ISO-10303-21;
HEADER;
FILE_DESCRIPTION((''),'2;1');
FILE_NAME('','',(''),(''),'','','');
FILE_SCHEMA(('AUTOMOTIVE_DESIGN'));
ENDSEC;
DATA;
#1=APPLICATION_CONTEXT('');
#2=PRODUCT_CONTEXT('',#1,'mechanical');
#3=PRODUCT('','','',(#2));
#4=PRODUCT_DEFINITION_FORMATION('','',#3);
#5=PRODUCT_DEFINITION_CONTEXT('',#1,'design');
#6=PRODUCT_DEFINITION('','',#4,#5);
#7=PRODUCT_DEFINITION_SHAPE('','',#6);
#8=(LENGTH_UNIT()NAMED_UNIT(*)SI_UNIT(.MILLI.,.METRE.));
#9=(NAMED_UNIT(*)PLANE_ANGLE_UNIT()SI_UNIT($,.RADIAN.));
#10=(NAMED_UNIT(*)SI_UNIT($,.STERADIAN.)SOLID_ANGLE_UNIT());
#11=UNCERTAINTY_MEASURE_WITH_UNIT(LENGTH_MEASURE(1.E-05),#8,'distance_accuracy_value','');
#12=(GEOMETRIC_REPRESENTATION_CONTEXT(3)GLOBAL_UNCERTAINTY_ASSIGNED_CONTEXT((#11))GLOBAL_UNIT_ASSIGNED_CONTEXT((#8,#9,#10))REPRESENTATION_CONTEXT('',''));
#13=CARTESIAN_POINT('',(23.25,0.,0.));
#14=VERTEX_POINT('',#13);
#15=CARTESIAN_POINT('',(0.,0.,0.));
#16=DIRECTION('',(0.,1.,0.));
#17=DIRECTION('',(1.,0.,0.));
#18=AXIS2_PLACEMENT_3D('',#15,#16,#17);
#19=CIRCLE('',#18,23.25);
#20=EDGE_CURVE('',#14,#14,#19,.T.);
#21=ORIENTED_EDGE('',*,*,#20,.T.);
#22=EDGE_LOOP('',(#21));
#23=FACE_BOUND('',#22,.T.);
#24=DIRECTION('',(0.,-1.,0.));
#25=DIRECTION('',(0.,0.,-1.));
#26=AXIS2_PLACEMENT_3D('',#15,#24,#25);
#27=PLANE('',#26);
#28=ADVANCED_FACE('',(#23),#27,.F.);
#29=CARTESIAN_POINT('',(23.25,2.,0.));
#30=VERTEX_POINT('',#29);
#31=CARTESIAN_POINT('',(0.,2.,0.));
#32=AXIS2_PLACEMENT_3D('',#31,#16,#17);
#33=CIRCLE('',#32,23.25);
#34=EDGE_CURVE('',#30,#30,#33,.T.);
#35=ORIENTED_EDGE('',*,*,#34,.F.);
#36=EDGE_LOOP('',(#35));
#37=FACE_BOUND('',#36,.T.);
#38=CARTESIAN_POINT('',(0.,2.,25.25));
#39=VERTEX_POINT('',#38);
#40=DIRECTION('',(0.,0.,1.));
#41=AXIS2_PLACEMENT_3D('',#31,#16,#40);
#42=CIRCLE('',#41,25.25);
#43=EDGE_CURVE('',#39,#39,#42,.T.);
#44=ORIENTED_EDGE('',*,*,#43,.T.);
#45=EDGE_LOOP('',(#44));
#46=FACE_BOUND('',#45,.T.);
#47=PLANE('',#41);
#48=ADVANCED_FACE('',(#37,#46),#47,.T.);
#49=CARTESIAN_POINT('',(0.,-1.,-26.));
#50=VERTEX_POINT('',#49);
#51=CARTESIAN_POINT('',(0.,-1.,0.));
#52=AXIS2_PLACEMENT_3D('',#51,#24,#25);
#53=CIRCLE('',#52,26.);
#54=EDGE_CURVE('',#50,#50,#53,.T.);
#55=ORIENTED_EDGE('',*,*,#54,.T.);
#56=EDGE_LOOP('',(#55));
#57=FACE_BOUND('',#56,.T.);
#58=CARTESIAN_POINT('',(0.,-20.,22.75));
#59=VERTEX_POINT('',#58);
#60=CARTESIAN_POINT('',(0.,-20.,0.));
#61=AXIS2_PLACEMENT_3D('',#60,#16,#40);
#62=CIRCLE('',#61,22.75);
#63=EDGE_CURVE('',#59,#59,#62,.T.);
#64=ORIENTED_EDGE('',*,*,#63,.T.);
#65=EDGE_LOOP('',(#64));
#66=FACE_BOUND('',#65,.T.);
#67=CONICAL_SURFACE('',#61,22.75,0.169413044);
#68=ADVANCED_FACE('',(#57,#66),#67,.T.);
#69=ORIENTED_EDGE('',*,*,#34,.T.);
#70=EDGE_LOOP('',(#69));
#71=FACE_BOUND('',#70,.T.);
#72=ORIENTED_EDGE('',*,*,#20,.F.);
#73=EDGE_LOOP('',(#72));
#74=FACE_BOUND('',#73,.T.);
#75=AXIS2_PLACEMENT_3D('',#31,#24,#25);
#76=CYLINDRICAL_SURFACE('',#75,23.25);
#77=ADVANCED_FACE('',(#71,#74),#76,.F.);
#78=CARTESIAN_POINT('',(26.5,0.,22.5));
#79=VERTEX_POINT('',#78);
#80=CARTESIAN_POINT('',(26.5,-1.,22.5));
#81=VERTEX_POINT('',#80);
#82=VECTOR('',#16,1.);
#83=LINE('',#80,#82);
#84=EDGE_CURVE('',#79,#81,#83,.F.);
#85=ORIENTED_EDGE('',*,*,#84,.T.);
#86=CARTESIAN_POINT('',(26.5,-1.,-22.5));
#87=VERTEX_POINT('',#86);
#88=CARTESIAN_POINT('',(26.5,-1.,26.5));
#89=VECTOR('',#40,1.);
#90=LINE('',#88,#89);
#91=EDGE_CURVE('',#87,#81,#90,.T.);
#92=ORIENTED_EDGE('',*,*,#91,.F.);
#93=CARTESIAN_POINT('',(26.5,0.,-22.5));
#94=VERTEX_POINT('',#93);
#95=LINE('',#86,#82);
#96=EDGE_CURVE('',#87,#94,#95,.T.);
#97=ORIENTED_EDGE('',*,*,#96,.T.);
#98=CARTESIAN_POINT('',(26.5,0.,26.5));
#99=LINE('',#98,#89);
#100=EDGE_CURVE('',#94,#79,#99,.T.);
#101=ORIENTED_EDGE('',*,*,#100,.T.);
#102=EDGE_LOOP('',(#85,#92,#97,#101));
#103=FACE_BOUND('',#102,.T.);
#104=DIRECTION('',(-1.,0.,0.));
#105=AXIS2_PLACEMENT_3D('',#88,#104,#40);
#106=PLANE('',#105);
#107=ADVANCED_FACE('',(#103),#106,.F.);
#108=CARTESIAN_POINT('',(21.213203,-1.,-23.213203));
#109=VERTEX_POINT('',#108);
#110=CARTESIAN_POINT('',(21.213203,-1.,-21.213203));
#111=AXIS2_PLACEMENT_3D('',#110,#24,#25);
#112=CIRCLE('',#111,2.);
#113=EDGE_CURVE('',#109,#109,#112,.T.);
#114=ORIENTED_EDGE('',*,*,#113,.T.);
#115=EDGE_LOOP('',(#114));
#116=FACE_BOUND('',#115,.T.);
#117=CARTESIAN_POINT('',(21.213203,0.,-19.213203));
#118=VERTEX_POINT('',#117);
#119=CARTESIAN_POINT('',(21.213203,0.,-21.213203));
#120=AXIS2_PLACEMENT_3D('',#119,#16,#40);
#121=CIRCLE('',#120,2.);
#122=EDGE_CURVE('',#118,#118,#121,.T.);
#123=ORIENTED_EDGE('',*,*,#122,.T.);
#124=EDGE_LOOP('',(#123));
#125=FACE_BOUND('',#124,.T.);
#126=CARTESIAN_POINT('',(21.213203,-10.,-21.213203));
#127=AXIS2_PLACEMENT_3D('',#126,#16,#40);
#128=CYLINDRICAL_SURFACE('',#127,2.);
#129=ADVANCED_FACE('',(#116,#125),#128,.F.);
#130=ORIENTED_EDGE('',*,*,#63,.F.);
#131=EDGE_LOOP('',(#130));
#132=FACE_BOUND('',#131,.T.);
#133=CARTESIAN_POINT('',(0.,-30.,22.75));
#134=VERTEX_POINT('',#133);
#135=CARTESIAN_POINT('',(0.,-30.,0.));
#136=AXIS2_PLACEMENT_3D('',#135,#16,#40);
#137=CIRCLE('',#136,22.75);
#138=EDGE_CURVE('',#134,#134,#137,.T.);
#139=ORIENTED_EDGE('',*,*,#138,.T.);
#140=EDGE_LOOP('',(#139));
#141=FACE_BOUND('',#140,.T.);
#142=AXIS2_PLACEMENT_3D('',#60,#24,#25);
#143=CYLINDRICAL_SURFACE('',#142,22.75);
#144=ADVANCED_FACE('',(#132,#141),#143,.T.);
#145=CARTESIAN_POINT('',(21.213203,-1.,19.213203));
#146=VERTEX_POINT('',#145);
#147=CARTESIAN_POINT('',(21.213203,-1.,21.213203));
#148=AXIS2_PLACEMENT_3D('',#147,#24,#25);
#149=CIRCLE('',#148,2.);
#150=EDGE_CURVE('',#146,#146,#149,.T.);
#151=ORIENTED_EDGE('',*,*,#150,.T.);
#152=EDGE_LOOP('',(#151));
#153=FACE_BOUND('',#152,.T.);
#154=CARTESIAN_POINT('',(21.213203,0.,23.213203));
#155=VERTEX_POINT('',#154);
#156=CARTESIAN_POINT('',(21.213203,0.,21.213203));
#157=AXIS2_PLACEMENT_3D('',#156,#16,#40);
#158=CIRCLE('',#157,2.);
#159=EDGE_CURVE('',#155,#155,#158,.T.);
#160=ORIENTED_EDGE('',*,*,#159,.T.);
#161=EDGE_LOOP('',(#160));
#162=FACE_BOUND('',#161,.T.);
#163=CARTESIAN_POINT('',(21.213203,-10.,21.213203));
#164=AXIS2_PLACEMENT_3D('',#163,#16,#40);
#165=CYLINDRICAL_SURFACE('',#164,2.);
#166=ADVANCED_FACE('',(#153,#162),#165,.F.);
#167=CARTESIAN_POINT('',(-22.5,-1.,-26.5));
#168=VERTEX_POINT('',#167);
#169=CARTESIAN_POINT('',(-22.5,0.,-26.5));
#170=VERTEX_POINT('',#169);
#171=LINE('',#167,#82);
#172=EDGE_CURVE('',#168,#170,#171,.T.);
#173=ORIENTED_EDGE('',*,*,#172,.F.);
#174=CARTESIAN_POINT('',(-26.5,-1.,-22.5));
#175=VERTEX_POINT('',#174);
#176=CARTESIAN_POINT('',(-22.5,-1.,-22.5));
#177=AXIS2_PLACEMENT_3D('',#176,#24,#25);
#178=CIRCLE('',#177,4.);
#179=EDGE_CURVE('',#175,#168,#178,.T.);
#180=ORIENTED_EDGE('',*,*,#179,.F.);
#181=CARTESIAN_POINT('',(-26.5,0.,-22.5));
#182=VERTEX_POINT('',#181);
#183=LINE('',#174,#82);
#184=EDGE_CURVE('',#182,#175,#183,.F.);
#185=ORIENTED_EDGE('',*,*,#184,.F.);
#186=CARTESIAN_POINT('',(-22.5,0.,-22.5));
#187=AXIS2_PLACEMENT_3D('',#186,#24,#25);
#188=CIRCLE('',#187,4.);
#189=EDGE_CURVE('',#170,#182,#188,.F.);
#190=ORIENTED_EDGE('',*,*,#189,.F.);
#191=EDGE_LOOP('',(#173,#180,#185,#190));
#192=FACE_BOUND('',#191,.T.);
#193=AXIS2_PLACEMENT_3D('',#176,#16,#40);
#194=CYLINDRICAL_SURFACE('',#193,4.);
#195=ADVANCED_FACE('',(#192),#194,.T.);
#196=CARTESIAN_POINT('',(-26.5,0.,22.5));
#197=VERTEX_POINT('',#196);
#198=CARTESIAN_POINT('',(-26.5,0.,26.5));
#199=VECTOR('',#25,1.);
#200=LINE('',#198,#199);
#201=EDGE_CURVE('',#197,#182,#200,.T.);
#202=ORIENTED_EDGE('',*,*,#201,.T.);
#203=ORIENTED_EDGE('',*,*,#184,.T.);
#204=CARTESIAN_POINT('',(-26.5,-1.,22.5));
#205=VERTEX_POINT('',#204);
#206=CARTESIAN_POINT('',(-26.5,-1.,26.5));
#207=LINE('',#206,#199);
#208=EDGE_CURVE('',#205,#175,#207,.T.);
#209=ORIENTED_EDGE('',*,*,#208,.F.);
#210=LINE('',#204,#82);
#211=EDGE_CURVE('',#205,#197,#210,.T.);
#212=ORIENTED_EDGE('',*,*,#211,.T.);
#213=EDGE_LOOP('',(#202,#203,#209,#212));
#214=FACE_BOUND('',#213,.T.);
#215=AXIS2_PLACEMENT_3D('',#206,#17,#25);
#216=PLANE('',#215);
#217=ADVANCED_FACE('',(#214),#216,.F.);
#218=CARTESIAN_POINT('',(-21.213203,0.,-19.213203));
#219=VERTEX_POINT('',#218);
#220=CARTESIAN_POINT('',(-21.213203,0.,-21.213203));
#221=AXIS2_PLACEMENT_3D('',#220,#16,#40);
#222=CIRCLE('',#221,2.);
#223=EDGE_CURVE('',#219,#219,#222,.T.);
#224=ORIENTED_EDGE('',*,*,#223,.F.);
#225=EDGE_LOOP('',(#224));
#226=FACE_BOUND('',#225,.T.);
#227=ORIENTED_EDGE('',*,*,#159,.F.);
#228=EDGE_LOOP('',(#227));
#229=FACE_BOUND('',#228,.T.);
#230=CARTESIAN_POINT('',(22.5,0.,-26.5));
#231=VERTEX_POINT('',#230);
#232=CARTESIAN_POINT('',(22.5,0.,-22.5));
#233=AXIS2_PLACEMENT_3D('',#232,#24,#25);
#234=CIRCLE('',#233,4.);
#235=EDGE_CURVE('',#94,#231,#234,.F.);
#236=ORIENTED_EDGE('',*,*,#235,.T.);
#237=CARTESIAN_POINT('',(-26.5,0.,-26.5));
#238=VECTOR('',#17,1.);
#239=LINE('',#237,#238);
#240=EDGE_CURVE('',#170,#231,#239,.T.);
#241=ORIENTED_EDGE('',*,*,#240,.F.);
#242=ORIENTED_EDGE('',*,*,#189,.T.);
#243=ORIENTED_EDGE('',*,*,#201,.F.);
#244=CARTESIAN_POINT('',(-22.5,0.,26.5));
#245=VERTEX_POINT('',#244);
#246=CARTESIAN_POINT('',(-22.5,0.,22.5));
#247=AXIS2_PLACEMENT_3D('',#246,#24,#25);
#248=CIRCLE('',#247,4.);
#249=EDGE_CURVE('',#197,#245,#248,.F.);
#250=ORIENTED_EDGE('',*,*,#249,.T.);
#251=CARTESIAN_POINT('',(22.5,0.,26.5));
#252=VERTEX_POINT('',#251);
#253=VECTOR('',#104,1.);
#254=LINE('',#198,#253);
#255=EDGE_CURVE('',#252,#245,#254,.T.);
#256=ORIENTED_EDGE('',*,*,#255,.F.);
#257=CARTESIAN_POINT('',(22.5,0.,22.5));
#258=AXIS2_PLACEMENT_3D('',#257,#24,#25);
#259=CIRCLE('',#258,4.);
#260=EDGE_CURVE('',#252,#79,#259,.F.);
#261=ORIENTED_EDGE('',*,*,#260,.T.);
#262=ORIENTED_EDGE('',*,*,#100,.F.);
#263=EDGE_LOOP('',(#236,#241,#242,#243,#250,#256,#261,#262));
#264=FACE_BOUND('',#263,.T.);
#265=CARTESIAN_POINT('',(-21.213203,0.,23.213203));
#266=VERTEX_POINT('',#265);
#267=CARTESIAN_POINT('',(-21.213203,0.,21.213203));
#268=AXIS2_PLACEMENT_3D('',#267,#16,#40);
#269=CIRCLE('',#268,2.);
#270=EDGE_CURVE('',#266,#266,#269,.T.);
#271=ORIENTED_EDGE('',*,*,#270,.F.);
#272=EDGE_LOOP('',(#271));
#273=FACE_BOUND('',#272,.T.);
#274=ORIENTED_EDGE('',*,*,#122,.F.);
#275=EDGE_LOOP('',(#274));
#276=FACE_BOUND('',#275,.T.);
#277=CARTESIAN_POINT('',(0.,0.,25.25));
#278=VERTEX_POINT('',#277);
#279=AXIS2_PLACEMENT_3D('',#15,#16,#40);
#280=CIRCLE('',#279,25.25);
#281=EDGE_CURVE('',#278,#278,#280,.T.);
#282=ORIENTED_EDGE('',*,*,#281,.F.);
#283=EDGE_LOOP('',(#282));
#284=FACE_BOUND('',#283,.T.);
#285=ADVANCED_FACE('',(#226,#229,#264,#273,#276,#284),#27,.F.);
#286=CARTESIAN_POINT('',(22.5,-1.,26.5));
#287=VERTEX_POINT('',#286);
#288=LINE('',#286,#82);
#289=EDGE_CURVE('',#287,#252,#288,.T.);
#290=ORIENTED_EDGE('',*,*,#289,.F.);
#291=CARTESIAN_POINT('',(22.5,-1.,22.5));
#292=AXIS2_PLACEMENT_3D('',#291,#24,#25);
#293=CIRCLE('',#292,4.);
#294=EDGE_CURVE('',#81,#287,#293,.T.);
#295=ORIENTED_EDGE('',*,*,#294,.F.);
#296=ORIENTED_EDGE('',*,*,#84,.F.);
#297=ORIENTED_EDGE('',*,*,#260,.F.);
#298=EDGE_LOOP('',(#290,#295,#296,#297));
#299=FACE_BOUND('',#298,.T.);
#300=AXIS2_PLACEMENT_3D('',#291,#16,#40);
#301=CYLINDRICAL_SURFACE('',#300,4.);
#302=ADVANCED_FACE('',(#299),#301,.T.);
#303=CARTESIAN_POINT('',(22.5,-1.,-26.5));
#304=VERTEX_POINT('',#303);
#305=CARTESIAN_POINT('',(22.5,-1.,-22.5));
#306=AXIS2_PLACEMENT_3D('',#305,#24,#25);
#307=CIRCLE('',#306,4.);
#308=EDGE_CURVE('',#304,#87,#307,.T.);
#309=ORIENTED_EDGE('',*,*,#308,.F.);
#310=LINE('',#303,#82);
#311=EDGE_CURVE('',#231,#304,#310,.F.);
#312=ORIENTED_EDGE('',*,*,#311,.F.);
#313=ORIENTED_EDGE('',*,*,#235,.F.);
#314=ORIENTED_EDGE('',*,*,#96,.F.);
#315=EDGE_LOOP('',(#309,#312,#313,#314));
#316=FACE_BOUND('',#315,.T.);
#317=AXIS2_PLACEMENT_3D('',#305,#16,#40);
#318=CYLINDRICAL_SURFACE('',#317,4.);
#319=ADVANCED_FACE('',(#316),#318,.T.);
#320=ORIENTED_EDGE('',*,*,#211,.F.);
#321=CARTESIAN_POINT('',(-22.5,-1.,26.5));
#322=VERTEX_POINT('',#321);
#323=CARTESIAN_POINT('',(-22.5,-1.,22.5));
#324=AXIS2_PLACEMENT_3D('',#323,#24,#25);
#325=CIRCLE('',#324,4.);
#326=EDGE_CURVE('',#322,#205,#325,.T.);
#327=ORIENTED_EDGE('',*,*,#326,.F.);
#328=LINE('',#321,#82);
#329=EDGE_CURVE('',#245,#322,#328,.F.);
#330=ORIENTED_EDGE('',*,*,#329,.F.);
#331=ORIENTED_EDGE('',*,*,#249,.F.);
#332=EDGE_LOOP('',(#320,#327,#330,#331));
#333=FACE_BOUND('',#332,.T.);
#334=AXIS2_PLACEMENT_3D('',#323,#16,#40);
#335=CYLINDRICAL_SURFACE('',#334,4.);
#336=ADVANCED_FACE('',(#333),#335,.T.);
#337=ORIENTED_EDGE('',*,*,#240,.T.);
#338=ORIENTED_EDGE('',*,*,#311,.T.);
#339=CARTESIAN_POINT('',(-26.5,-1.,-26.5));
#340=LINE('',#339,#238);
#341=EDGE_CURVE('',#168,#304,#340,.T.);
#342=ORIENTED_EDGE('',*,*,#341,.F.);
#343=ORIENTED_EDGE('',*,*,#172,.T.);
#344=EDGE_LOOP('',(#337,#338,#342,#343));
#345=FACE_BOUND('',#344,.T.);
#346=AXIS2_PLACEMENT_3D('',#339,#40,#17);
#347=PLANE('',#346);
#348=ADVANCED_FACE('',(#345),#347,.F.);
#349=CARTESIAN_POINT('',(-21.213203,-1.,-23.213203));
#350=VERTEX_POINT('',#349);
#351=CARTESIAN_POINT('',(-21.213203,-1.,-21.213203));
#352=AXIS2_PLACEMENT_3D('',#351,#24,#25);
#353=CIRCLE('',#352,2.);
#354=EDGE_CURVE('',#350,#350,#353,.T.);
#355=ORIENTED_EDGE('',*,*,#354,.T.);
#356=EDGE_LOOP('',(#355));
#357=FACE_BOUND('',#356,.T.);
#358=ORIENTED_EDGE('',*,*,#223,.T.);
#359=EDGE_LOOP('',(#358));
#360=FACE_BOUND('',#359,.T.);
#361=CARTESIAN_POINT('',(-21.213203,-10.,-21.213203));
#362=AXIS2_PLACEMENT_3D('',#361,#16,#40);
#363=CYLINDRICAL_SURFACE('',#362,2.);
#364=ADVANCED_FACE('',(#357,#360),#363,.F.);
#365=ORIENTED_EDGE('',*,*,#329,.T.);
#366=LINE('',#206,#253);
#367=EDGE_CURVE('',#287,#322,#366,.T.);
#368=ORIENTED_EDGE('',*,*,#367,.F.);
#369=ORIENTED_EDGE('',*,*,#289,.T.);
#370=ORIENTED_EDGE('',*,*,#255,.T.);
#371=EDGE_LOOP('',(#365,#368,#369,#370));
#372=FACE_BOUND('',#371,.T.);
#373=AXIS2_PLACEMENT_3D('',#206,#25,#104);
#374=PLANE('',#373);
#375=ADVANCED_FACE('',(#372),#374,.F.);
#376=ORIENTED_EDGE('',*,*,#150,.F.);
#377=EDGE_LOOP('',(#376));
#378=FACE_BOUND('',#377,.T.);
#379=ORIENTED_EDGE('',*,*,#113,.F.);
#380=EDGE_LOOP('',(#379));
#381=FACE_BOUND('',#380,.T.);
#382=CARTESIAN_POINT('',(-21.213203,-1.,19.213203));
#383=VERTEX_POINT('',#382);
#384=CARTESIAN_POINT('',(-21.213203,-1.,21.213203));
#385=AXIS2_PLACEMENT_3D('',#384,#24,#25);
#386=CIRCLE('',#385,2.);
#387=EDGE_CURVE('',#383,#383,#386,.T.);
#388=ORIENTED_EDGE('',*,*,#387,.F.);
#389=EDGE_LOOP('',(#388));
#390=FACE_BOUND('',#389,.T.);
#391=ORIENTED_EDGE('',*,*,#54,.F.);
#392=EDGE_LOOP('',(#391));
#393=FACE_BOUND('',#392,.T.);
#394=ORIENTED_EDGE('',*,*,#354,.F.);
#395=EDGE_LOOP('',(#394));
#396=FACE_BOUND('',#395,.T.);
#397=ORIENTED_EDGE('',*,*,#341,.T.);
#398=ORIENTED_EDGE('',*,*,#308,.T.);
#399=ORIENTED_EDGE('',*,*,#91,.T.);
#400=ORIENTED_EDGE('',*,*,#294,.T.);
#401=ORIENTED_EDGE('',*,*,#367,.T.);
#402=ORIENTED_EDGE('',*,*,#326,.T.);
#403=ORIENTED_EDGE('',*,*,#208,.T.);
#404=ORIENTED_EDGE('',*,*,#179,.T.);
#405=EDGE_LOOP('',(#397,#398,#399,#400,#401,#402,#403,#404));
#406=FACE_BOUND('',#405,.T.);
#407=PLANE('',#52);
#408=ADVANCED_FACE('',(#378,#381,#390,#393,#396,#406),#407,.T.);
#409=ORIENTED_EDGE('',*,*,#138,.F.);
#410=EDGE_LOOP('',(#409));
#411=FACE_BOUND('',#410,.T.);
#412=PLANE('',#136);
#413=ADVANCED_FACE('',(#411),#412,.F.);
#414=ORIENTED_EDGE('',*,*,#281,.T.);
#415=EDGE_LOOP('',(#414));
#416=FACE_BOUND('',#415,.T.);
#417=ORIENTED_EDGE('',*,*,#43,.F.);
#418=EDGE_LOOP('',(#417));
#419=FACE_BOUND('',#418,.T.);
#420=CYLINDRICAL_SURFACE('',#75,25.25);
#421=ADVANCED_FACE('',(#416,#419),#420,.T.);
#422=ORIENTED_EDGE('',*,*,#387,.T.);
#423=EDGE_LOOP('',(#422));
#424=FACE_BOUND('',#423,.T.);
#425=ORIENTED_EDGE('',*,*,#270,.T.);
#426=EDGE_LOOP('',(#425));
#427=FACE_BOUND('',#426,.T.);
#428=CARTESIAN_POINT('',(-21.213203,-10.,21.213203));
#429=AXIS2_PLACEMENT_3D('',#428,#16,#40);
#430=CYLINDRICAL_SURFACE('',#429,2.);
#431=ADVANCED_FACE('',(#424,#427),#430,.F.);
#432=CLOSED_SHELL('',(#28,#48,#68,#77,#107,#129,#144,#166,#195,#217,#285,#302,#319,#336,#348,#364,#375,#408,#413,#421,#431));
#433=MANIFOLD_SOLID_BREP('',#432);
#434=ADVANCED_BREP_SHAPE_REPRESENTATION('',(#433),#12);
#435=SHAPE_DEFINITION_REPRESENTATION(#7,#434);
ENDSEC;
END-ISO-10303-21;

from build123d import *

# Parameters (mm, degrees)
SKETCH_1_R          = 25.25
SKETCH_1_R_2        = 23.25
EXTRUDE_1_DEPTH     = 2
SKETCH_2_W          = 53
SKETCH_2_H          = 53
EXTRUDE_1_2_DEPTH   = 1
FILLET_1_R          = 4
SKETCH_3_R          = 22.75
EXTRUDE_2_DEPTH     = 10
SKETCH_5_R          = 2
CUT_EXTRUDE_1_DEPTH = 10


# Read off the part's stored shape, not the designer's step: 放样3
with BuildPart() as part:
    # 草图1 → Extrude 1 (new body)
    with BuildSketch(Plane(origin=(0, 0, 0), x_dir=(1, 0, 0), z_dir=(0, 1, 0))):
        Circle(SKETCH_1_R)
        Circle(SKETCH_1_R_2, mode=Mode.SUBTRACT)
    extrude(amount=EXTRUDE_1_DEPTH)

    # 草图2 → Extrude 1 2 (add)
    with BuildSketch(Plane.XZ):
        Rectangle(SKETCH_2_W, SKETCH_2_H)
    extrude(amount=EXTRUDE_1_2_DEPTH)

    # 圆角1
    fillet_1_edges = [part.edges().sort_by_distance(p)[0] for p in [
        (26.5, -0.5, 26.5),
        (-26.5, -0.5, 26.5),
        (-26.5, -0.5, -26.5),
        (26.5, -0.5, -26.5),
    ]]
    fillet(fillet_1_edges, radius=FILLET_1_R)



with BuildPart() as body_2:
    # 草图3 → 凸台-拉伸2 (new body)
    with BuildSketch(Plane(origin=(0, -30, 0), x_dir=(1, 0, 0), z_dir=(0, 1, 0))):
        with Locations(Location((0, 0, 0), (0, 0, 270))):
            Circle(SKETCH_3_R)
    extrude(amount=EXTRUDE_2_DEPTH)


with BuildPart() as part_1:
    add(part.part)

    add(body_2.part)  # 放样3 merges body 2
    # 放样3 outline → 放样3 (revolve)
    with BuildSketch(Plane.XY):
        Polygon((0, -20), (22.75, -20), (26, -1), (0, -1), align=None)
    revolve(axis=Axis((0, 0, 0), (0, 1, 0)))

    # 草图5 → 切除-拉伸1 (cut)
    with BuildSketch(Plane(origin=(0, 0, 0), x_dir=(1, 0, 0), z_dir=(0, 1, 0))):
        with Locations(Location((-21.213203436, 21.213203436, 0), (0, 0, 270))):
            Circle(SKETCH_5_R)
        with Locations(Location((-21.213203436, -21.213203436, 0), (0, 0, 270))):
            Circle(SKETCH_5_R)
        with Locations(Location((21.213203436, -21.213203436, 0), (0, 0, 270))):
            Circle(SKETCH_5_R)
        with Locations(Location((21.213203436, 21.213203436, 0), (0, 0, 270))):
            Circle(SKETCH_5_R)
    extrude(amount=-CUT_EXTRUDE_1_DEPTH, mode=Mode.SUBTRACT)


solid = part_1.part
